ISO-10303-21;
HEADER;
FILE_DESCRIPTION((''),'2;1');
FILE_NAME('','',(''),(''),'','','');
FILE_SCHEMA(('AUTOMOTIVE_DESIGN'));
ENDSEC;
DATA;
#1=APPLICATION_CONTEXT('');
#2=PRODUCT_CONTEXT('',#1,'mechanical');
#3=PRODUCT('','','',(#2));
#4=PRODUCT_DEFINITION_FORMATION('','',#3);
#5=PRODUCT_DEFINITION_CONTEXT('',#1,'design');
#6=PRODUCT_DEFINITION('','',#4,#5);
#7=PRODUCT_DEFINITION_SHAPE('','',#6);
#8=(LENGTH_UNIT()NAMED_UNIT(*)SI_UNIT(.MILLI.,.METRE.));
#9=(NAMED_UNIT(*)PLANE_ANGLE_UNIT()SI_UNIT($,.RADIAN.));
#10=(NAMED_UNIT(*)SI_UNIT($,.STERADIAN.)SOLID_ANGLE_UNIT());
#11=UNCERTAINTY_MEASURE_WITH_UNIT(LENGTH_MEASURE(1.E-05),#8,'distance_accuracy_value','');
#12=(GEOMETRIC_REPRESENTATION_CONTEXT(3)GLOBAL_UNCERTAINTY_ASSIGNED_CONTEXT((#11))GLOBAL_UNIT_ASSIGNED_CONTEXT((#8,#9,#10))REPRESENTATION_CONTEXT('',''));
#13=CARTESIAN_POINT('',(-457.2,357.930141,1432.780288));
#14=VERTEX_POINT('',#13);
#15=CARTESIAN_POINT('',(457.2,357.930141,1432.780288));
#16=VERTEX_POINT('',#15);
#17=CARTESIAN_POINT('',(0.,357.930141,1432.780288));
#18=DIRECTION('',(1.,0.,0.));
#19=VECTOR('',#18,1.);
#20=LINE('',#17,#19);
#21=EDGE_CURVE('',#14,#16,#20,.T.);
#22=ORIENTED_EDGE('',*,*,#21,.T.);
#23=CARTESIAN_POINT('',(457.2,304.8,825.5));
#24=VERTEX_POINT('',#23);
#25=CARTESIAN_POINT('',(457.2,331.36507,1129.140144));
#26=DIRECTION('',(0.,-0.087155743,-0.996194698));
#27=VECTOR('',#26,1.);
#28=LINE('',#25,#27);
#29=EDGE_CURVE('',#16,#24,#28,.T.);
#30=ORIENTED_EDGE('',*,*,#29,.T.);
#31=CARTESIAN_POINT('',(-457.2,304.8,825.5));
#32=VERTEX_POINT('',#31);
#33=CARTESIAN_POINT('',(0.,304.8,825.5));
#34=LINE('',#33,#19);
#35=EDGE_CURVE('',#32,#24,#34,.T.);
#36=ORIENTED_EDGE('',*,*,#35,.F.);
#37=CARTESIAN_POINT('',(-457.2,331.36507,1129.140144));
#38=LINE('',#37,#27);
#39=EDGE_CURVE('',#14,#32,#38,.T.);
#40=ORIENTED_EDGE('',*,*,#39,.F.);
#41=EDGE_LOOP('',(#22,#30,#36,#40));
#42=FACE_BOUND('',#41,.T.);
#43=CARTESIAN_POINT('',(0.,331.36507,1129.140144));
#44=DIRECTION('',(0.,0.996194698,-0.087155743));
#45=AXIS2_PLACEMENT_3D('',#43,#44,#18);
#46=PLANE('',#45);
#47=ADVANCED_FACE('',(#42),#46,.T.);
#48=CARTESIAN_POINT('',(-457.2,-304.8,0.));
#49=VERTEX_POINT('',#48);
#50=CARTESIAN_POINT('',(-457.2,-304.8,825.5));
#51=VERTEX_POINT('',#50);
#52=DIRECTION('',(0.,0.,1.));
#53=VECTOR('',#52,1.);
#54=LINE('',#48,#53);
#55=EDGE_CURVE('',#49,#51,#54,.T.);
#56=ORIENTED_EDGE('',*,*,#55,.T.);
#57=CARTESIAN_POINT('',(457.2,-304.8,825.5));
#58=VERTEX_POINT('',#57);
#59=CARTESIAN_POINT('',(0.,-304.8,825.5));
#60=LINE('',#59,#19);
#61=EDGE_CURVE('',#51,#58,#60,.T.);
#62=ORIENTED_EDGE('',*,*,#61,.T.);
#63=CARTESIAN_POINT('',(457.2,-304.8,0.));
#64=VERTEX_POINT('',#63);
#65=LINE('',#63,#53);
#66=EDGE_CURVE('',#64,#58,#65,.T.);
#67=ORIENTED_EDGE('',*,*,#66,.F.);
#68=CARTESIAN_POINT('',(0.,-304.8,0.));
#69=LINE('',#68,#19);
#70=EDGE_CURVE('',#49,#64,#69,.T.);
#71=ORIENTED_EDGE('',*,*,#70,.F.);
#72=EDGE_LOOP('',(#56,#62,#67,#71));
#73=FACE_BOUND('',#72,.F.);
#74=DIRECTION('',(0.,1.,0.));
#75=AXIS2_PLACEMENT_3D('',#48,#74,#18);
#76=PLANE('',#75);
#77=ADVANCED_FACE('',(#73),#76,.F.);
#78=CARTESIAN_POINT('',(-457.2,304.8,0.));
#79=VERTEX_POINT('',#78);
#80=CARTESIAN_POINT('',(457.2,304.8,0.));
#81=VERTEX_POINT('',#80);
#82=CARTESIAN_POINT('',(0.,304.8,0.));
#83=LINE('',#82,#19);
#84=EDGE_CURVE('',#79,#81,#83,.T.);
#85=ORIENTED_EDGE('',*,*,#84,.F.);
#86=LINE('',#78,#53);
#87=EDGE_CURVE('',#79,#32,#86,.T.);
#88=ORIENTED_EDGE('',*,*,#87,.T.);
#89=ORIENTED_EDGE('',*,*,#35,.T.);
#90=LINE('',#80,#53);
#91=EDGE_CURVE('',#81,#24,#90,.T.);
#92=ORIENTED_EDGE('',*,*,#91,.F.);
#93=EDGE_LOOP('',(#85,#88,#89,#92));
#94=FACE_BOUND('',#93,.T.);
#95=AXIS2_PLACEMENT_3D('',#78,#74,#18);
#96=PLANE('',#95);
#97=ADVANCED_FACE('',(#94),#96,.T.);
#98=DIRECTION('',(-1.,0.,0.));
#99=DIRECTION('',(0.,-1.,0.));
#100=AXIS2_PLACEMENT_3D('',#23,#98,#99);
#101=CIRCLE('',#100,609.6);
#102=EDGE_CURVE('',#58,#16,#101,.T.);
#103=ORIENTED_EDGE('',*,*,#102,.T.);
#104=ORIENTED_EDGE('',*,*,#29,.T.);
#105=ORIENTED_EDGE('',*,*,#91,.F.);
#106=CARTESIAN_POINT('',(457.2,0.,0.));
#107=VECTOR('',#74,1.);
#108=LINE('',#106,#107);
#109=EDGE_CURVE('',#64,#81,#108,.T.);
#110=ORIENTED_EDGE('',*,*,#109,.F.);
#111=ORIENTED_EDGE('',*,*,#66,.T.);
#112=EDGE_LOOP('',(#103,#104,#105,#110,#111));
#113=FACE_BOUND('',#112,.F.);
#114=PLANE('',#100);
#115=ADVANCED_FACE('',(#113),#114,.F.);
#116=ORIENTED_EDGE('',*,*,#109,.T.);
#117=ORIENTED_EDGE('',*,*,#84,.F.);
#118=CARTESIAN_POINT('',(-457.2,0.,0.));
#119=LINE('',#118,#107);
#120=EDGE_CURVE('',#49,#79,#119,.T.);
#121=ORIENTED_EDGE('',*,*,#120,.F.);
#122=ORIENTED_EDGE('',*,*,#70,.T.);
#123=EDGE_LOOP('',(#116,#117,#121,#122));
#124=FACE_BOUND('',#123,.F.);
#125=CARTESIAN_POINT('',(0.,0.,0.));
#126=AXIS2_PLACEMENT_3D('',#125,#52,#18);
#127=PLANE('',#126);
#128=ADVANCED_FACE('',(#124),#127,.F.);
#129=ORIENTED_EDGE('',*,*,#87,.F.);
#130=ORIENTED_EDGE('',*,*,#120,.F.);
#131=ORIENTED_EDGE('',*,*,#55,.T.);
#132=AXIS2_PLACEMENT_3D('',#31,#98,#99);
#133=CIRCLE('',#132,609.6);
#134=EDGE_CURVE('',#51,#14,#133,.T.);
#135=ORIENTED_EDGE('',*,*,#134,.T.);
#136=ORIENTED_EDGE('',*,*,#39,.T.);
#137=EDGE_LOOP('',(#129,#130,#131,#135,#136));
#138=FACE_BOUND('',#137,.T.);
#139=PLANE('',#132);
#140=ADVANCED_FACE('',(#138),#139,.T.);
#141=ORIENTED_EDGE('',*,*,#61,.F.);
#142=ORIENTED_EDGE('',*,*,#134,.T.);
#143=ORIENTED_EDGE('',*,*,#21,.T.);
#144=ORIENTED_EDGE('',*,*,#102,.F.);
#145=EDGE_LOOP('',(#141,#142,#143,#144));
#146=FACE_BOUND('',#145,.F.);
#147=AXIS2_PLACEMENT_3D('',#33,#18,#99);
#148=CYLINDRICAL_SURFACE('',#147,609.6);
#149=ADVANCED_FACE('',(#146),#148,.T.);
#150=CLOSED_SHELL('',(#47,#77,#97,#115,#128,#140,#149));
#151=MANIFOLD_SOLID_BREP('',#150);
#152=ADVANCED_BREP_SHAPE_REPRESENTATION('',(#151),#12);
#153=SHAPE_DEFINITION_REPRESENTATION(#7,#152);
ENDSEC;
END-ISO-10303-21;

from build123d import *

# Parameters (mm, degrees)
F2_W     = 914.4
F2_H     = 609.6
F3_DEPTH = 825.5
F4_W     = 914.4
F4_H     = 609.6
F5_ANGLE = 95


# Not quite as in the source:
# - a variable given as a bare number and used for a length is read in inches; the dataset says mm whatever the document's units were


with BuildPart() as f3:
    # F2 (on Top) → F3 (new body)
    with BuildSketch(Plane.XY):
        Rectangle(F2_W, F2_H)
    extrude(amount=F3_DEPTH)

    # F4 (on face) → F5 (revolve)
    with BuildSketch(Plane.XY.offset(825.5)):
        Rectangle(F4_W, F4_H)
    revolve(axis=Axis((0, 304.8, 825.5), (-1, 0, 0)), revolution_arc=F5_ANGLE)


solid = f3.part
